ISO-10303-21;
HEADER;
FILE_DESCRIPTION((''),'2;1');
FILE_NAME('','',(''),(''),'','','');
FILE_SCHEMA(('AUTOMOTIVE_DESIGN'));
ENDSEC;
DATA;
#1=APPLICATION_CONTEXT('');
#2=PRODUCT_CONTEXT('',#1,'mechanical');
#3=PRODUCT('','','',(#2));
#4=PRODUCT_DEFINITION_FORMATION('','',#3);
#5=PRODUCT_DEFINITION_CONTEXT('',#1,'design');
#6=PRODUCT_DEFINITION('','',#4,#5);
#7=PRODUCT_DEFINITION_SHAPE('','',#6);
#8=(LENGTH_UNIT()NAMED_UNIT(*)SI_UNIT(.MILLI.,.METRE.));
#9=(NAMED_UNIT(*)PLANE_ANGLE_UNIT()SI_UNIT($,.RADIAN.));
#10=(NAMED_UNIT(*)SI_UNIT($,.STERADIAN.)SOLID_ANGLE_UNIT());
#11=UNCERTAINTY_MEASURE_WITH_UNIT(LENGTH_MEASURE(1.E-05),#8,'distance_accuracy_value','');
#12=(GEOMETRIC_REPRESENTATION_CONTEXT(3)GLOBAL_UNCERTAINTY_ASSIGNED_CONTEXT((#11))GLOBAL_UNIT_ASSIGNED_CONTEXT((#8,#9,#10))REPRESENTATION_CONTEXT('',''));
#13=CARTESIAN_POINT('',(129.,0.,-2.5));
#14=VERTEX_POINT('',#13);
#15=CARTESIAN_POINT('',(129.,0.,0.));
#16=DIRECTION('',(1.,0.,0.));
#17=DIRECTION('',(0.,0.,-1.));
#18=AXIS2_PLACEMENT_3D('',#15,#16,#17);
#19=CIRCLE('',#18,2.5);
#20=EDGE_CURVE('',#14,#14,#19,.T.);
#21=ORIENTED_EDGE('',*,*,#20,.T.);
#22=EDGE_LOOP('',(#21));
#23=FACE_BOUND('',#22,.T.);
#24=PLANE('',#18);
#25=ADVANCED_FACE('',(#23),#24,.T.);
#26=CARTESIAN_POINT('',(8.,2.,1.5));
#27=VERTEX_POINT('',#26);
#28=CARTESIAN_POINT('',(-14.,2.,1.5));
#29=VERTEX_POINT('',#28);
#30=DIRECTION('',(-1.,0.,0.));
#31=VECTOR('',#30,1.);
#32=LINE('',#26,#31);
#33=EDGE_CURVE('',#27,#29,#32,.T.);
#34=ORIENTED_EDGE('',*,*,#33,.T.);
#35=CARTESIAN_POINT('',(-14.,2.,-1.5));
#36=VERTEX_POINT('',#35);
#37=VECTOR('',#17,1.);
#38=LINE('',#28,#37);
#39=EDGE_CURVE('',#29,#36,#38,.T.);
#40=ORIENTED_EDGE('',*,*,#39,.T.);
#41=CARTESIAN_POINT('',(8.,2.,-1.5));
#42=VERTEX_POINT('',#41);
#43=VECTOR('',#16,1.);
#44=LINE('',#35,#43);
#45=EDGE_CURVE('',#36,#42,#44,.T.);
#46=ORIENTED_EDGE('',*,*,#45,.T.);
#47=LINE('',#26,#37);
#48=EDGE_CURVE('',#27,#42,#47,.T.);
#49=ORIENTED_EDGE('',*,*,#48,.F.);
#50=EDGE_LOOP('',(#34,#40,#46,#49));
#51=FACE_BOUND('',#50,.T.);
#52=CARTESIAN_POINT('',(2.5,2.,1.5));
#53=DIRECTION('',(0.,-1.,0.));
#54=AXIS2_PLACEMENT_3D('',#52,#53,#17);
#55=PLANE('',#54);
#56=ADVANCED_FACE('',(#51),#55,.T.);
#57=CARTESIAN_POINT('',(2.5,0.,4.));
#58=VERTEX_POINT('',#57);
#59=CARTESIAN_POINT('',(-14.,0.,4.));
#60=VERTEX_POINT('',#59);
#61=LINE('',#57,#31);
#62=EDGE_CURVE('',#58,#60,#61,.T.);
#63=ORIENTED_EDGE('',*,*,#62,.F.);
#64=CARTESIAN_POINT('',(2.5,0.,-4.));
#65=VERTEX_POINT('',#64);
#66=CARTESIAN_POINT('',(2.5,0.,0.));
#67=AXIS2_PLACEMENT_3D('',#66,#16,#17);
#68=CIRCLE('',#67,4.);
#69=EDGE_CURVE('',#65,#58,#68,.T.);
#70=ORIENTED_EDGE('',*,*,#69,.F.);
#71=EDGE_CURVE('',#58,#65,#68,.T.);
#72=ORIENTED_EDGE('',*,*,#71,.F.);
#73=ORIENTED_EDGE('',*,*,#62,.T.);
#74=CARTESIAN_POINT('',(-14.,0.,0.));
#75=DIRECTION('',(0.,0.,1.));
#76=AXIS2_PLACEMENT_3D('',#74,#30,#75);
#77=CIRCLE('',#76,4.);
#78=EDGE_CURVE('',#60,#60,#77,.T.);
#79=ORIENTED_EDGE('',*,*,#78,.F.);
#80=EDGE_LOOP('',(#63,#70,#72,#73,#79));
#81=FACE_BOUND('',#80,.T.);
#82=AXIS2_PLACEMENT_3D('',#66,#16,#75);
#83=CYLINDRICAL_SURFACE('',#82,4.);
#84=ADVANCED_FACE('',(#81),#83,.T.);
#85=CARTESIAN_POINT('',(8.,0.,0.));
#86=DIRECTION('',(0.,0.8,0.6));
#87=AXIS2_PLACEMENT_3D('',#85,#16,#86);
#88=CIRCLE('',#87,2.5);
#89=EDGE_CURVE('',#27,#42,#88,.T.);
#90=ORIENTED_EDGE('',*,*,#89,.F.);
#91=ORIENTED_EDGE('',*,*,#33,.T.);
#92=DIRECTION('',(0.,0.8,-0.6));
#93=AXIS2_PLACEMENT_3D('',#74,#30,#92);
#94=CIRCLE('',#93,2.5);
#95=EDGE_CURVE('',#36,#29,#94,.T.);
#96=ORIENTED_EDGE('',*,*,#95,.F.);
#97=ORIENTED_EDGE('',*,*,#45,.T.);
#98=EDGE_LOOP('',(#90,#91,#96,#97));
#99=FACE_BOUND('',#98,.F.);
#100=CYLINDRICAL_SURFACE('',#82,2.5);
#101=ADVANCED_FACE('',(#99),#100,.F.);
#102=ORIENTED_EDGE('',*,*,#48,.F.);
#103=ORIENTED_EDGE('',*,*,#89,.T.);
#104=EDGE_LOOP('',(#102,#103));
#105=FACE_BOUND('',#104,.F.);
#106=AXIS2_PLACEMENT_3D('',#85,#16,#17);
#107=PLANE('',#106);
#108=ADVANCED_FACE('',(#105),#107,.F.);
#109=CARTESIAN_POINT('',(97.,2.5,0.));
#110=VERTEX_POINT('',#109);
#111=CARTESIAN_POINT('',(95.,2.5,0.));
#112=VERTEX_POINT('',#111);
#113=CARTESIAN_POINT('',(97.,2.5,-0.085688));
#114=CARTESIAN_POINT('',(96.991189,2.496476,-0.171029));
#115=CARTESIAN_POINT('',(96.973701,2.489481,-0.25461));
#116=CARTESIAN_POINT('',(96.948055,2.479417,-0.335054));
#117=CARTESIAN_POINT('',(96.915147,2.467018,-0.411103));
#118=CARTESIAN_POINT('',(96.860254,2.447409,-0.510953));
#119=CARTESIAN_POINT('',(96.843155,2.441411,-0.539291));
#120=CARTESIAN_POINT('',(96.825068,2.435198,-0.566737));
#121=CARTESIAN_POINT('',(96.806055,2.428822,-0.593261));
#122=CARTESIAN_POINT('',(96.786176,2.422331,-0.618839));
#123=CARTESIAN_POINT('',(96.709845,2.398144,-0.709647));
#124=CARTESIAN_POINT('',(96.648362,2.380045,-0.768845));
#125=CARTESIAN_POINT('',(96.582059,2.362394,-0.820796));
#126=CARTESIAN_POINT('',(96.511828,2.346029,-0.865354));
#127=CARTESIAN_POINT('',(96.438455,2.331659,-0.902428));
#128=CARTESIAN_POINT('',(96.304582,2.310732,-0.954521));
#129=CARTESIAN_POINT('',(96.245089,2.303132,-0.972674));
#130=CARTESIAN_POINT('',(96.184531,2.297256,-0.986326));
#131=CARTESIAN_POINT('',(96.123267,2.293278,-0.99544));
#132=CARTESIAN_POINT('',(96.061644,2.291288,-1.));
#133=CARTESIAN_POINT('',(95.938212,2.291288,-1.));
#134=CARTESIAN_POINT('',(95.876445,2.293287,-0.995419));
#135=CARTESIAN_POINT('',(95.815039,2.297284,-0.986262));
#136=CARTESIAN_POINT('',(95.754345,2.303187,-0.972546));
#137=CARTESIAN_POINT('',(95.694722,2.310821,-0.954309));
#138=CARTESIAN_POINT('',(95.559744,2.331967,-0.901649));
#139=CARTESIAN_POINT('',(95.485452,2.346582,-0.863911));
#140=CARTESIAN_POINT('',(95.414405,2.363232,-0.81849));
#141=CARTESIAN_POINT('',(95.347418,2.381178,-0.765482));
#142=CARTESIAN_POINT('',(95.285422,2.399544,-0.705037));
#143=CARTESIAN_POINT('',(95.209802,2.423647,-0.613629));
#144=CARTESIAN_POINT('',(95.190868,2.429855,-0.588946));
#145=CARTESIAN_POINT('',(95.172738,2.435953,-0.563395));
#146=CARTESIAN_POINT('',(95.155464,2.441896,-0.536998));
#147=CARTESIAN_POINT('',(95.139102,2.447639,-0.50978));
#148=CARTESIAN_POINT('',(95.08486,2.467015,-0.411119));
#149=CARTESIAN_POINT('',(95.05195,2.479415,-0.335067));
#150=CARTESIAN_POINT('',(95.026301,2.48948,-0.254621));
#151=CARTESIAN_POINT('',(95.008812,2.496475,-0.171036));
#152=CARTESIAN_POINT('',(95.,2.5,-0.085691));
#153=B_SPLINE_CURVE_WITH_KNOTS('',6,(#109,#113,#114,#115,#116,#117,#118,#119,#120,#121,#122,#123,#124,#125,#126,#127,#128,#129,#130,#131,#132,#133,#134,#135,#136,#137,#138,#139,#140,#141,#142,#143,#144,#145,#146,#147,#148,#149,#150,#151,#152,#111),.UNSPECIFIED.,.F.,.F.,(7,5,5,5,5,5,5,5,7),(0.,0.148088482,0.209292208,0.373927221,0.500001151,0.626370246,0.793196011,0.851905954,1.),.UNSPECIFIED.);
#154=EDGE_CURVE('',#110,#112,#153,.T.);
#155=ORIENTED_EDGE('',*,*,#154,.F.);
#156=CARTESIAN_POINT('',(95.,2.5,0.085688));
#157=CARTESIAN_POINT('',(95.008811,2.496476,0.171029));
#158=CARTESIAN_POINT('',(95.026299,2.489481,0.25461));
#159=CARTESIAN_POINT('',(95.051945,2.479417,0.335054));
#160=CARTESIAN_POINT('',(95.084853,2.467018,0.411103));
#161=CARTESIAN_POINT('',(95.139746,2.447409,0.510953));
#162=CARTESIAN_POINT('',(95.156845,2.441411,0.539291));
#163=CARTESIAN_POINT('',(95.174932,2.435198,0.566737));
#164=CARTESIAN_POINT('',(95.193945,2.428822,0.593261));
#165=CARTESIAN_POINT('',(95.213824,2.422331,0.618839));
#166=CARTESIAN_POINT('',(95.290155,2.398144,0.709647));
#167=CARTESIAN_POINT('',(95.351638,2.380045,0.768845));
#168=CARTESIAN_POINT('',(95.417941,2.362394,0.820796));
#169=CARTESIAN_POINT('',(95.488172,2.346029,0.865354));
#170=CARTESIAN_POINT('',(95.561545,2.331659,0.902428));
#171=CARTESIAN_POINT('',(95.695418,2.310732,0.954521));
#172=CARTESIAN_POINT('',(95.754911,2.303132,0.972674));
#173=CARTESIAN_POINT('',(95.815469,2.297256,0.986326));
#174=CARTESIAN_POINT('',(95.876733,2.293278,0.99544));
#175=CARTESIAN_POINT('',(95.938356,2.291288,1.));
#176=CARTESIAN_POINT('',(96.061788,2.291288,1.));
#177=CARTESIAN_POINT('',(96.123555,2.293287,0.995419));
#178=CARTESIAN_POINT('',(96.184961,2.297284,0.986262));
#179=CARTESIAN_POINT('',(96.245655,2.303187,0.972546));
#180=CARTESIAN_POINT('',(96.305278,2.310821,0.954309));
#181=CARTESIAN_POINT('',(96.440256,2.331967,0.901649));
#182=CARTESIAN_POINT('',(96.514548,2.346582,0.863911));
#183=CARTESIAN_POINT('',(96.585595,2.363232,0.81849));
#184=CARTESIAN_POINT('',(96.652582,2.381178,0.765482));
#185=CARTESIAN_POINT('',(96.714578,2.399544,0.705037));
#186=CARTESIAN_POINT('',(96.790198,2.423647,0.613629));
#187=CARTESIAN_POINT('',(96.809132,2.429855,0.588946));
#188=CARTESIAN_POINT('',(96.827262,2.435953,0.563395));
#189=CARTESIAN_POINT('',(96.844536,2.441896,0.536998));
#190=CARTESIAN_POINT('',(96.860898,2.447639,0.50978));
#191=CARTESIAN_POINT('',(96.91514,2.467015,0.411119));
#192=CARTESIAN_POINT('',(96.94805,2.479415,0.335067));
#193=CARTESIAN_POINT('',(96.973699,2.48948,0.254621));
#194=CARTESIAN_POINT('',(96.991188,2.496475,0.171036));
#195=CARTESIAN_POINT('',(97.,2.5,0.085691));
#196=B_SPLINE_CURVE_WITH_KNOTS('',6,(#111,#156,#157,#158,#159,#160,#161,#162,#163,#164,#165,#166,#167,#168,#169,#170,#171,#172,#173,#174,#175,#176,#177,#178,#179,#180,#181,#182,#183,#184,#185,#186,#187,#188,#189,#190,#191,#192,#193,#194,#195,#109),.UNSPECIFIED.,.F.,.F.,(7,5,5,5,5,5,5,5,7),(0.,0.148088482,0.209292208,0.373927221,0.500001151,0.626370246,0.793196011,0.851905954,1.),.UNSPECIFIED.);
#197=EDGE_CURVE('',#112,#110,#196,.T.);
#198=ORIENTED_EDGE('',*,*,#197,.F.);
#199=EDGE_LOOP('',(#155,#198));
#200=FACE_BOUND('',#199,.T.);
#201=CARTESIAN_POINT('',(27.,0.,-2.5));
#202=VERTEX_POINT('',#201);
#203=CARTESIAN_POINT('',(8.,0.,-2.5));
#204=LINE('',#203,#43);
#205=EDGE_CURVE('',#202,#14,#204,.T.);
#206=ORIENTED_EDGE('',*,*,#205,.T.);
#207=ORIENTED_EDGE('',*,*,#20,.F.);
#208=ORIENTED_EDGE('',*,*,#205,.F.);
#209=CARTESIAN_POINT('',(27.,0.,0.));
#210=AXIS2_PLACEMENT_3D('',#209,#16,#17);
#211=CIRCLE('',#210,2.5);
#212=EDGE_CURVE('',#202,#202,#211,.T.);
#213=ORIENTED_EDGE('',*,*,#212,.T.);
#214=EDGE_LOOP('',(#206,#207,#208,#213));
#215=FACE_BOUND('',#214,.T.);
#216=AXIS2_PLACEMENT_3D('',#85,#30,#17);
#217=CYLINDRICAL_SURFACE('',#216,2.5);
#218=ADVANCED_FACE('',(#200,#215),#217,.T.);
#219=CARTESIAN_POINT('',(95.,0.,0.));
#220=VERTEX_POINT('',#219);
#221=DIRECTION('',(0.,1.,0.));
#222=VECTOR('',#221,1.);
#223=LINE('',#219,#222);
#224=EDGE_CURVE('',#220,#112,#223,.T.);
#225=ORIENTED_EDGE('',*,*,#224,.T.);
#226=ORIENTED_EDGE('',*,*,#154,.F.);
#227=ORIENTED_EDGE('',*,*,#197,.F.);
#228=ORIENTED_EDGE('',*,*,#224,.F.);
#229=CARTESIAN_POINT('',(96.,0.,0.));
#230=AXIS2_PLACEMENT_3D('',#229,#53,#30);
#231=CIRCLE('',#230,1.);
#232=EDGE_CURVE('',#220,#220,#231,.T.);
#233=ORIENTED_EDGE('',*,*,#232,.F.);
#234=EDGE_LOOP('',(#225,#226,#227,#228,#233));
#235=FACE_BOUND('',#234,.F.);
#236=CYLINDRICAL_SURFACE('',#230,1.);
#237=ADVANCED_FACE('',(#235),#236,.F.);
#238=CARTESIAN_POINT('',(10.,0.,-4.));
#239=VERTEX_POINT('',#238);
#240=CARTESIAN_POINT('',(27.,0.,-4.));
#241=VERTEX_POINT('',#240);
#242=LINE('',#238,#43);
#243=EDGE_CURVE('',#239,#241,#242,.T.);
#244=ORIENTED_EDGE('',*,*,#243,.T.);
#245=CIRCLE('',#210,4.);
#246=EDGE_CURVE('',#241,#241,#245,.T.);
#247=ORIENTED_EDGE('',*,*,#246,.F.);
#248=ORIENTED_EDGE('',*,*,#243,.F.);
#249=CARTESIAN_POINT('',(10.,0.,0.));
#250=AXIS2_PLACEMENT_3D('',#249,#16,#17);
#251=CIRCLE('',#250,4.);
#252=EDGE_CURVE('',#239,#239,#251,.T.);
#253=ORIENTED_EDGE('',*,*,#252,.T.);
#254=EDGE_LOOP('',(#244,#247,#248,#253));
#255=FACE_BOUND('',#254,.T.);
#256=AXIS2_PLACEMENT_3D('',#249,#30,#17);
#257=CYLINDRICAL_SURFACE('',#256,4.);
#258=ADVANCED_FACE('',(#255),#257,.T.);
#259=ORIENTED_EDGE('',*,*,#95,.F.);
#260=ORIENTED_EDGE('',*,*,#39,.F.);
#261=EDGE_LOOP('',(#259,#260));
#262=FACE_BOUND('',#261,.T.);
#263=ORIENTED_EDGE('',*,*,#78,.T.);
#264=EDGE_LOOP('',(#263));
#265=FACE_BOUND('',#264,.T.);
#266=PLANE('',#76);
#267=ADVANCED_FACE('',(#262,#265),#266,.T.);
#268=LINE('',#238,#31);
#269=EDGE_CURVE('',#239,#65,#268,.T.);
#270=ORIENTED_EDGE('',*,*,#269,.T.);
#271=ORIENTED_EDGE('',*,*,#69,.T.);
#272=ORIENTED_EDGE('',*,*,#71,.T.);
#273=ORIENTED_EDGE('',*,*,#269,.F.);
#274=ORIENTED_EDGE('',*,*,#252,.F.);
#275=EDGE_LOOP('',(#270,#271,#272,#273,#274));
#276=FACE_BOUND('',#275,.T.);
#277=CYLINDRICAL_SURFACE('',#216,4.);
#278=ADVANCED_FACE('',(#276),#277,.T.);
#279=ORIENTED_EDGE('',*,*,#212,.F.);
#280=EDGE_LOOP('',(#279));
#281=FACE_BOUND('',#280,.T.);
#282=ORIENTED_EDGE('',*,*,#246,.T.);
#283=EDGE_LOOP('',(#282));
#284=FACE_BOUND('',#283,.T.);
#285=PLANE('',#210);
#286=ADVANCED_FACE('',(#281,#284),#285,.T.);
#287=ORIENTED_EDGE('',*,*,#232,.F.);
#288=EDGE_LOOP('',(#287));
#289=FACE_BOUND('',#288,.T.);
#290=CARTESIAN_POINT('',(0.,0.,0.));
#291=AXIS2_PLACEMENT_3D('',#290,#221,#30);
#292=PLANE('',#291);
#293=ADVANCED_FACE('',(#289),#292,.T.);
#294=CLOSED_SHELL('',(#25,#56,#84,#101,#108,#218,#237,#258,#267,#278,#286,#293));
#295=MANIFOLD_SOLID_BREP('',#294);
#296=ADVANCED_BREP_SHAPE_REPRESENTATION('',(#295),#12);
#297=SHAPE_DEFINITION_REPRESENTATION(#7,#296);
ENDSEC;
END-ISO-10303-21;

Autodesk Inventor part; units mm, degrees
ref_plane "YZ Plane" through (0, 0, 0) normal (1, 0, 0) x (0, 1, 0)
ref_plane "XZ Plane" through (0, 0, 0) normal (0, 1, 0) x (-1, 0, 0)
ref_plane "XY Plane" through (0, 0, 0) normal (0, 0, 1) x (1, 0, 0)
sketch "Sketch1" plane through (0, 0, 0) normal (1, 0, 0) x (0, 1, 0)
  circle A0 centre (0, 0) radius 4
  circle A1 centre (0, 0) radius 2.5
  line L0 (2, 0) -> (2, -1.5)
  line L1 (2, 0) -> (2, 1.5)
  dimension "d0" = 8
  dimension "d1" = 5
extrude "Extrusion1" add sketch "Sketch1" along normal blind 8 contours A0 | A1 L0 L1 picked at (2.0912, -0.8466)
sketch "Sketch2" plane through (8, 0, 0) normal (1, 0, 0) x (0, 0, -1)
  circle A0 centre (0, 0) radius 4
  circle A1 centre (0, 0) radius 2.5
extrude "Extrusion2" add sketch "Sketch2" along normal blind 2
sketch "Sketch3" plane through (8, 0, 0) normal (1, 0, 0) x (0, 0, -1)
  circle A0 centre (0, 0) radius 2.5
extrude "Extrusion3" add sketch "Sketch3" along normal blind 151
sketch "Sketch4" plane through (0, 0, 0) normal (-1, 0, 0) x (0, 0, 1)
  circle A0 centre (0, 0) radius 4
extrude "Extrusion4" cut sketch "Sketch4" against normal blind 2.5
sketch "Sketch6" plane through (0, 0, 0) normal (0, 1, 0) x (-1, 0, 0)
  line L0 (-159, 2.5) -> (-159, -2.5) projected
  line L1 (-159, 0) -> (-96, 0)
  circle A0 centre (-96, 0) radius 1
  point P0 (0, 0)
  dimension "d17" = 63
  dimension "d18" = 2
extrude "Extrusion6" cut sketch "Sketch6" along normal blind 10
thread "Thread2" size "M2x0.4" class "6H" standard "ANSI Metric M Profile" full length
sketch "Sketch7" plane through (2.5, 0, 0) normal (-1, 0, 0) x (0, 0, 1)
  circle A0 centre (0, 0) radius 2.5
  circle A1 centre (0, 0) radius 4
  line L0 (1.5, 2) -> (-1.5, 2) projected
  line L1 (0, 2) -> (1.5, 2)
  line L2 (0, 2) -> (-1.5, 2)
extrude "Extrusion7" add sketch "Sketch7" along normal blind 16.5
sketch "Sketch8" plane through (2.5, 0, 0) normal (-1, 0, 0) x (0, 0, 1)
  circle A0 centre (0, 0) radius 2.5
  line L0 (1.5, 2) -> (-1.5, 2) projected
  line L1 (1.5, 2) -> (-1.5, 2)
extrude "Extrusion8" add sketch "Sketch8" along normal blind 16.5 contours L0 A0 picked at (-0.3466, 2.0912)
sketch "Sketch10" plane through (10, 0, 0) normal (1, 0, 0) x (0, 0, -1)
  circle A0 centre (0, 0) radius 2.5
  circle A1 centre (0, 0) radius 4
extrude "Extrusion9" add sketch "Sketch10" along normal blind 17
sketch "Sketch11" plane through (159, 0, 0) normal (1, 0, 0) x (0, 0, -1)
  circle A0 centre (0, 0) radius 2.5
extrude "Extrusion10" cut sketch "Sketch11" against normal blind 30
properties part number "wormgear_axis_6mm" material "Stainless Steel"
